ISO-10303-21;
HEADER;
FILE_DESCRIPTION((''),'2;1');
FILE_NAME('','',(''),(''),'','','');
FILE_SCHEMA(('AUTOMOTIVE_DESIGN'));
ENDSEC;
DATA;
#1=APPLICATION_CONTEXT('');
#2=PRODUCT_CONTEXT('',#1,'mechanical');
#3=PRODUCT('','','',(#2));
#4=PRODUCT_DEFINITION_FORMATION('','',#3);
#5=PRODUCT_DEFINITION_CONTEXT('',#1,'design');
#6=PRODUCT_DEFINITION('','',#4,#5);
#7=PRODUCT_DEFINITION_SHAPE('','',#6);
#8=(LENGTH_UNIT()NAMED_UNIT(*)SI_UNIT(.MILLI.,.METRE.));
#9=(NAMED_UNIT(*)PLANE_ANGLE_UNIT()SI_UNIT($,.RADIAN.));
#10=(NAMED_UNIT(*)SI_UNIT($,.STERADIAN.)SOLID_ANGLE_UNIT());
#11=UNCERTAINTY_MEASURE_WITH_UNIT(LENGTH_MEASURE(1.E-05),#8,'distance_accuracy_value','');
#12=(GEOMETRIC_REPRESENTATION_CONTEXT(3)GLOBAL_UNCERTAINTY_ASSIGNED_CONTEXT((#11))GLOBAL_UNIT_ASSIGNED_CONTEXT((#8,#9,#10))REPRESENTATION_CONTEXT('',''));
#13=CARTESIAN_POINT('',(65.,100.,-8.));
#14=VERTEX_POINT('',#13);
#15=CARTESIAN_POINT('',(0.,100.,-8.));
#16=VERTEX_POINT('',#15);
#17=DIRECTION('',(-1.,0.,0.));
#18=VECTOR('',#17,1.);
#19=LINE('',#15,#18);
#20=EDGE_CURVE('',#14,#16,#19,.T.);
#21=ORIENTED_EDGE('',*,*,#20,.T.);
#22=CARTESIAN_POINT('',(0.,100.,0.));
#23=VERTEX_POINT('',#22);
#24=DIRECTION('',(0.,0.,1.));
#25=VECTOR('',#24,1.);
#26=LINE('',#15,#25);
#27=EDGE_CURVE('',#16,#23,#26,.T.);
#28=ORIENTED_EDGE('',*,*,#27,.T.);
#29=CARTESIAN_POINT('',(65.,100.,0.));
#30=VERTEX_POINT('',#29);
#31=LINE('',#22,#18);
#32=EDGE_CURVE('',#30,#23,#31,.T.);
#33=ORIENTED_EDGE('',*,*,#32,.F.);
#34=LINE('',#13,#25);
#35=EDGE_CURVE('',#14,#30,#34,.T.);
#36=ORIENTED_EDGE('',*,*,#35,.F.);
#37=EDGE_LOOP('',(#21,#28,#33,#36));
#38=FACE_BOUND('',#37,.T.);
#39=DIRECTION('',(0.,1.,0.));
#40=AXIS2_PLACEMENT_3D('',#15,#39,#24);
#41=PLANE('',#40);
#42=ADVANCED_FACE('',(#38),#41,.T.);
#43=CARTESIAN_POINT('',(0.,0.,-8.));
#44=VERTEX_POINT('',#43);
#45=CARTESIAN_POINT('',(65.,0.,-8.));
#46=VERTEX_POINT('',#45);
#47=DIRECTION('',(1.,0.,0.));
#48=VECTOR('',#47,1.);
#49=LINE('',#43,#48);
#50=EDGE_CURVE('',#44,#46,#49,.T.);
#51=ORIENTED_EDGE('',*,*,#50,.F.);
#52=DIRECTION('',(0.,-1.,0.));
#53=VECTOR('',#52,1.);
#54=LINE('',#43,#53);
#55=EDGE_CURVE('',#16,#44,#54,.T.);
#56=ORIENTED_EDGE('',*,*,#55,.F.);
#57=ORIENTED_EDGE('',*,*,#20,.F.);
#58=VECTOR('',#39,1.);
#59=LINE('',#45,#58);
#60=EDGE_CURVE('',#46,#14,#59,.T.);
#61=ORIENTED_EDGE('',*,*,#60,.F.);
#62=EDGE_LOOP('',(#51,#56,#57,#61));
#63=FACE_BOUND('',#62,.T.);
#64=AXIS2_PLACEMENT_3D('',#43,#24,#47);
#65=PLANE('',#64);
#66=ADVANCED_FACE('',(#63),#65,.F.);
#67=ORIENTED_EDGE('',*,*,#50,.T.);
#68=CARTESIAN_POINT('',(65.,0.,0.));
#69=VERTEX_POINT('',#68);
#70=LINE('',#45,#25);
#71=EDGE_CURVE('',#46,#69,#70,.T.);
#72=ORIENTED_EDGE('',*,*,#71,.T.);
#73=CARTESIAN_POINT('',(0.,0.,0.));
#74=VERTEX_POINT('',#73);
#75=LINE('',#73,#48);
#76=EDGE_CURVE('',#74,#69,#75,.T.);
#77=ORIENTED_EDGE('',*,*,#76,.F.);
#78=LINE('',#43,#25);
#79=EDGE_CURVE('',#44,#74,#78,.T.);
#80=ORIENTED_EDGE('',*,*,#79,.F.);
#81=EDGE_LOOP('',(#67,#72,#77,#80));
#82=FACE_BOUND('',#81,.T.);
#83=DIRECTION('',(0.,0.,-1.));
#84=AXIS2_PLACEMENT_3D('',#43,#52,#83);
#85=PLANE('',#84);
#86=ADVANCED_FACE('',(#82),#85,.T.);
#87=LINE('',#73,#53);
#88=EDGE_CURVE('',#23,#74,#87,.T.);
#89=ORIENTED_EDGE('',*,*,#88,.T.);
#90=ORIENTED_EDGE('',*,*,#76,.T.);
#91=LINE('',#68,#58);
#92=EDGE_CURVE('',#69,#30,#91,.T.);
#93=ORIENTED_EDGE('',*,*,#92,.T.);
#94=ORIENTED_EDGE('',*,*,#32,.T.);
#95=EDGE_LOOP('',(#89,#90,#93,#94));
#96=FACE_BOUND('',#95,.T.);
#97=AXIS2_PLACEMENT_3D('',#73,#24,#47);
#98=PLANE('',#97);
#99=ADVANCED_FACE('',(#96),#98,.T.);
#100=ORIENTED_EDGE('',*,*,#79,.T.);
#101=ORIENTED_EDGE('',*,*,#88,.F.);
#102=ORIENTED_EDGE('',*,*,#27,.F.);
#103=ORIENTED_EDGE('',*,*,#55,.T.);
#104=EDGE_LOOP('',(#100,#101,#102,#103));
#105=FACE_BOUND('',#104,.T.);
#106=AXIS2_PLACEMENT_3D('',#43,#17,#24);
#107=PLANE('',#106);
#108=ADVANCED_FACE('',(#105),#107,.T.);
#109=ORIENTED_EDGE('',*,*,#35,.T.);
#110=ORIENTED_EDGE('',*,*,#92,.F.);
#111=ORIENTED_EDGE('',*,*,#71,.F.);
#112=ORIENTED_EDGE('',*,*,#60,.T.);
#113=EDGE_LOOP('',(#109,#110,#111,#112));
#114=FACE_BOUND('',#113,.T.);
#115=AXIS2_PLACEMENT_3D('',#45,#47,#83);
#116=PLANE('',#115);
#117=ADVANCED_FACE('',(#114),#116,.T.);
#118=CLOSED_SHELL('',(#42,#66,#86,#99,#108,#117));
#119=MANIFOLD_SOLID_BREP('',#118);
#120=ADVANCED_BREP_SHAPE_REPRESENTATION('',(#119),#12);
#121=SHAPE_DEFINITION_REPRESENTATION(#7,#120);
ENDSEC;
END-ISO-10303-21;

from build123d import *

# Parameters (mm, degrees)
SKETCH_1_W             = 65
SKETCH_1_H             = 100
SM_BASE_FLANGE_1_DEPTH = 8


# Sheet-metal steps are written as plain solids
with BuildPart() as part:
    # Sketch 1 → 基体-法兰1 (new body)
    with BuildSketch(Plane.XY):
        with Locations((32.5, 50)):
            Rectangle(SKETCH_1_W, SKETCH_1_H)
    extrude(amount=-SM_BASE_FLANGE_1_DEPTH)


solid = part.part
